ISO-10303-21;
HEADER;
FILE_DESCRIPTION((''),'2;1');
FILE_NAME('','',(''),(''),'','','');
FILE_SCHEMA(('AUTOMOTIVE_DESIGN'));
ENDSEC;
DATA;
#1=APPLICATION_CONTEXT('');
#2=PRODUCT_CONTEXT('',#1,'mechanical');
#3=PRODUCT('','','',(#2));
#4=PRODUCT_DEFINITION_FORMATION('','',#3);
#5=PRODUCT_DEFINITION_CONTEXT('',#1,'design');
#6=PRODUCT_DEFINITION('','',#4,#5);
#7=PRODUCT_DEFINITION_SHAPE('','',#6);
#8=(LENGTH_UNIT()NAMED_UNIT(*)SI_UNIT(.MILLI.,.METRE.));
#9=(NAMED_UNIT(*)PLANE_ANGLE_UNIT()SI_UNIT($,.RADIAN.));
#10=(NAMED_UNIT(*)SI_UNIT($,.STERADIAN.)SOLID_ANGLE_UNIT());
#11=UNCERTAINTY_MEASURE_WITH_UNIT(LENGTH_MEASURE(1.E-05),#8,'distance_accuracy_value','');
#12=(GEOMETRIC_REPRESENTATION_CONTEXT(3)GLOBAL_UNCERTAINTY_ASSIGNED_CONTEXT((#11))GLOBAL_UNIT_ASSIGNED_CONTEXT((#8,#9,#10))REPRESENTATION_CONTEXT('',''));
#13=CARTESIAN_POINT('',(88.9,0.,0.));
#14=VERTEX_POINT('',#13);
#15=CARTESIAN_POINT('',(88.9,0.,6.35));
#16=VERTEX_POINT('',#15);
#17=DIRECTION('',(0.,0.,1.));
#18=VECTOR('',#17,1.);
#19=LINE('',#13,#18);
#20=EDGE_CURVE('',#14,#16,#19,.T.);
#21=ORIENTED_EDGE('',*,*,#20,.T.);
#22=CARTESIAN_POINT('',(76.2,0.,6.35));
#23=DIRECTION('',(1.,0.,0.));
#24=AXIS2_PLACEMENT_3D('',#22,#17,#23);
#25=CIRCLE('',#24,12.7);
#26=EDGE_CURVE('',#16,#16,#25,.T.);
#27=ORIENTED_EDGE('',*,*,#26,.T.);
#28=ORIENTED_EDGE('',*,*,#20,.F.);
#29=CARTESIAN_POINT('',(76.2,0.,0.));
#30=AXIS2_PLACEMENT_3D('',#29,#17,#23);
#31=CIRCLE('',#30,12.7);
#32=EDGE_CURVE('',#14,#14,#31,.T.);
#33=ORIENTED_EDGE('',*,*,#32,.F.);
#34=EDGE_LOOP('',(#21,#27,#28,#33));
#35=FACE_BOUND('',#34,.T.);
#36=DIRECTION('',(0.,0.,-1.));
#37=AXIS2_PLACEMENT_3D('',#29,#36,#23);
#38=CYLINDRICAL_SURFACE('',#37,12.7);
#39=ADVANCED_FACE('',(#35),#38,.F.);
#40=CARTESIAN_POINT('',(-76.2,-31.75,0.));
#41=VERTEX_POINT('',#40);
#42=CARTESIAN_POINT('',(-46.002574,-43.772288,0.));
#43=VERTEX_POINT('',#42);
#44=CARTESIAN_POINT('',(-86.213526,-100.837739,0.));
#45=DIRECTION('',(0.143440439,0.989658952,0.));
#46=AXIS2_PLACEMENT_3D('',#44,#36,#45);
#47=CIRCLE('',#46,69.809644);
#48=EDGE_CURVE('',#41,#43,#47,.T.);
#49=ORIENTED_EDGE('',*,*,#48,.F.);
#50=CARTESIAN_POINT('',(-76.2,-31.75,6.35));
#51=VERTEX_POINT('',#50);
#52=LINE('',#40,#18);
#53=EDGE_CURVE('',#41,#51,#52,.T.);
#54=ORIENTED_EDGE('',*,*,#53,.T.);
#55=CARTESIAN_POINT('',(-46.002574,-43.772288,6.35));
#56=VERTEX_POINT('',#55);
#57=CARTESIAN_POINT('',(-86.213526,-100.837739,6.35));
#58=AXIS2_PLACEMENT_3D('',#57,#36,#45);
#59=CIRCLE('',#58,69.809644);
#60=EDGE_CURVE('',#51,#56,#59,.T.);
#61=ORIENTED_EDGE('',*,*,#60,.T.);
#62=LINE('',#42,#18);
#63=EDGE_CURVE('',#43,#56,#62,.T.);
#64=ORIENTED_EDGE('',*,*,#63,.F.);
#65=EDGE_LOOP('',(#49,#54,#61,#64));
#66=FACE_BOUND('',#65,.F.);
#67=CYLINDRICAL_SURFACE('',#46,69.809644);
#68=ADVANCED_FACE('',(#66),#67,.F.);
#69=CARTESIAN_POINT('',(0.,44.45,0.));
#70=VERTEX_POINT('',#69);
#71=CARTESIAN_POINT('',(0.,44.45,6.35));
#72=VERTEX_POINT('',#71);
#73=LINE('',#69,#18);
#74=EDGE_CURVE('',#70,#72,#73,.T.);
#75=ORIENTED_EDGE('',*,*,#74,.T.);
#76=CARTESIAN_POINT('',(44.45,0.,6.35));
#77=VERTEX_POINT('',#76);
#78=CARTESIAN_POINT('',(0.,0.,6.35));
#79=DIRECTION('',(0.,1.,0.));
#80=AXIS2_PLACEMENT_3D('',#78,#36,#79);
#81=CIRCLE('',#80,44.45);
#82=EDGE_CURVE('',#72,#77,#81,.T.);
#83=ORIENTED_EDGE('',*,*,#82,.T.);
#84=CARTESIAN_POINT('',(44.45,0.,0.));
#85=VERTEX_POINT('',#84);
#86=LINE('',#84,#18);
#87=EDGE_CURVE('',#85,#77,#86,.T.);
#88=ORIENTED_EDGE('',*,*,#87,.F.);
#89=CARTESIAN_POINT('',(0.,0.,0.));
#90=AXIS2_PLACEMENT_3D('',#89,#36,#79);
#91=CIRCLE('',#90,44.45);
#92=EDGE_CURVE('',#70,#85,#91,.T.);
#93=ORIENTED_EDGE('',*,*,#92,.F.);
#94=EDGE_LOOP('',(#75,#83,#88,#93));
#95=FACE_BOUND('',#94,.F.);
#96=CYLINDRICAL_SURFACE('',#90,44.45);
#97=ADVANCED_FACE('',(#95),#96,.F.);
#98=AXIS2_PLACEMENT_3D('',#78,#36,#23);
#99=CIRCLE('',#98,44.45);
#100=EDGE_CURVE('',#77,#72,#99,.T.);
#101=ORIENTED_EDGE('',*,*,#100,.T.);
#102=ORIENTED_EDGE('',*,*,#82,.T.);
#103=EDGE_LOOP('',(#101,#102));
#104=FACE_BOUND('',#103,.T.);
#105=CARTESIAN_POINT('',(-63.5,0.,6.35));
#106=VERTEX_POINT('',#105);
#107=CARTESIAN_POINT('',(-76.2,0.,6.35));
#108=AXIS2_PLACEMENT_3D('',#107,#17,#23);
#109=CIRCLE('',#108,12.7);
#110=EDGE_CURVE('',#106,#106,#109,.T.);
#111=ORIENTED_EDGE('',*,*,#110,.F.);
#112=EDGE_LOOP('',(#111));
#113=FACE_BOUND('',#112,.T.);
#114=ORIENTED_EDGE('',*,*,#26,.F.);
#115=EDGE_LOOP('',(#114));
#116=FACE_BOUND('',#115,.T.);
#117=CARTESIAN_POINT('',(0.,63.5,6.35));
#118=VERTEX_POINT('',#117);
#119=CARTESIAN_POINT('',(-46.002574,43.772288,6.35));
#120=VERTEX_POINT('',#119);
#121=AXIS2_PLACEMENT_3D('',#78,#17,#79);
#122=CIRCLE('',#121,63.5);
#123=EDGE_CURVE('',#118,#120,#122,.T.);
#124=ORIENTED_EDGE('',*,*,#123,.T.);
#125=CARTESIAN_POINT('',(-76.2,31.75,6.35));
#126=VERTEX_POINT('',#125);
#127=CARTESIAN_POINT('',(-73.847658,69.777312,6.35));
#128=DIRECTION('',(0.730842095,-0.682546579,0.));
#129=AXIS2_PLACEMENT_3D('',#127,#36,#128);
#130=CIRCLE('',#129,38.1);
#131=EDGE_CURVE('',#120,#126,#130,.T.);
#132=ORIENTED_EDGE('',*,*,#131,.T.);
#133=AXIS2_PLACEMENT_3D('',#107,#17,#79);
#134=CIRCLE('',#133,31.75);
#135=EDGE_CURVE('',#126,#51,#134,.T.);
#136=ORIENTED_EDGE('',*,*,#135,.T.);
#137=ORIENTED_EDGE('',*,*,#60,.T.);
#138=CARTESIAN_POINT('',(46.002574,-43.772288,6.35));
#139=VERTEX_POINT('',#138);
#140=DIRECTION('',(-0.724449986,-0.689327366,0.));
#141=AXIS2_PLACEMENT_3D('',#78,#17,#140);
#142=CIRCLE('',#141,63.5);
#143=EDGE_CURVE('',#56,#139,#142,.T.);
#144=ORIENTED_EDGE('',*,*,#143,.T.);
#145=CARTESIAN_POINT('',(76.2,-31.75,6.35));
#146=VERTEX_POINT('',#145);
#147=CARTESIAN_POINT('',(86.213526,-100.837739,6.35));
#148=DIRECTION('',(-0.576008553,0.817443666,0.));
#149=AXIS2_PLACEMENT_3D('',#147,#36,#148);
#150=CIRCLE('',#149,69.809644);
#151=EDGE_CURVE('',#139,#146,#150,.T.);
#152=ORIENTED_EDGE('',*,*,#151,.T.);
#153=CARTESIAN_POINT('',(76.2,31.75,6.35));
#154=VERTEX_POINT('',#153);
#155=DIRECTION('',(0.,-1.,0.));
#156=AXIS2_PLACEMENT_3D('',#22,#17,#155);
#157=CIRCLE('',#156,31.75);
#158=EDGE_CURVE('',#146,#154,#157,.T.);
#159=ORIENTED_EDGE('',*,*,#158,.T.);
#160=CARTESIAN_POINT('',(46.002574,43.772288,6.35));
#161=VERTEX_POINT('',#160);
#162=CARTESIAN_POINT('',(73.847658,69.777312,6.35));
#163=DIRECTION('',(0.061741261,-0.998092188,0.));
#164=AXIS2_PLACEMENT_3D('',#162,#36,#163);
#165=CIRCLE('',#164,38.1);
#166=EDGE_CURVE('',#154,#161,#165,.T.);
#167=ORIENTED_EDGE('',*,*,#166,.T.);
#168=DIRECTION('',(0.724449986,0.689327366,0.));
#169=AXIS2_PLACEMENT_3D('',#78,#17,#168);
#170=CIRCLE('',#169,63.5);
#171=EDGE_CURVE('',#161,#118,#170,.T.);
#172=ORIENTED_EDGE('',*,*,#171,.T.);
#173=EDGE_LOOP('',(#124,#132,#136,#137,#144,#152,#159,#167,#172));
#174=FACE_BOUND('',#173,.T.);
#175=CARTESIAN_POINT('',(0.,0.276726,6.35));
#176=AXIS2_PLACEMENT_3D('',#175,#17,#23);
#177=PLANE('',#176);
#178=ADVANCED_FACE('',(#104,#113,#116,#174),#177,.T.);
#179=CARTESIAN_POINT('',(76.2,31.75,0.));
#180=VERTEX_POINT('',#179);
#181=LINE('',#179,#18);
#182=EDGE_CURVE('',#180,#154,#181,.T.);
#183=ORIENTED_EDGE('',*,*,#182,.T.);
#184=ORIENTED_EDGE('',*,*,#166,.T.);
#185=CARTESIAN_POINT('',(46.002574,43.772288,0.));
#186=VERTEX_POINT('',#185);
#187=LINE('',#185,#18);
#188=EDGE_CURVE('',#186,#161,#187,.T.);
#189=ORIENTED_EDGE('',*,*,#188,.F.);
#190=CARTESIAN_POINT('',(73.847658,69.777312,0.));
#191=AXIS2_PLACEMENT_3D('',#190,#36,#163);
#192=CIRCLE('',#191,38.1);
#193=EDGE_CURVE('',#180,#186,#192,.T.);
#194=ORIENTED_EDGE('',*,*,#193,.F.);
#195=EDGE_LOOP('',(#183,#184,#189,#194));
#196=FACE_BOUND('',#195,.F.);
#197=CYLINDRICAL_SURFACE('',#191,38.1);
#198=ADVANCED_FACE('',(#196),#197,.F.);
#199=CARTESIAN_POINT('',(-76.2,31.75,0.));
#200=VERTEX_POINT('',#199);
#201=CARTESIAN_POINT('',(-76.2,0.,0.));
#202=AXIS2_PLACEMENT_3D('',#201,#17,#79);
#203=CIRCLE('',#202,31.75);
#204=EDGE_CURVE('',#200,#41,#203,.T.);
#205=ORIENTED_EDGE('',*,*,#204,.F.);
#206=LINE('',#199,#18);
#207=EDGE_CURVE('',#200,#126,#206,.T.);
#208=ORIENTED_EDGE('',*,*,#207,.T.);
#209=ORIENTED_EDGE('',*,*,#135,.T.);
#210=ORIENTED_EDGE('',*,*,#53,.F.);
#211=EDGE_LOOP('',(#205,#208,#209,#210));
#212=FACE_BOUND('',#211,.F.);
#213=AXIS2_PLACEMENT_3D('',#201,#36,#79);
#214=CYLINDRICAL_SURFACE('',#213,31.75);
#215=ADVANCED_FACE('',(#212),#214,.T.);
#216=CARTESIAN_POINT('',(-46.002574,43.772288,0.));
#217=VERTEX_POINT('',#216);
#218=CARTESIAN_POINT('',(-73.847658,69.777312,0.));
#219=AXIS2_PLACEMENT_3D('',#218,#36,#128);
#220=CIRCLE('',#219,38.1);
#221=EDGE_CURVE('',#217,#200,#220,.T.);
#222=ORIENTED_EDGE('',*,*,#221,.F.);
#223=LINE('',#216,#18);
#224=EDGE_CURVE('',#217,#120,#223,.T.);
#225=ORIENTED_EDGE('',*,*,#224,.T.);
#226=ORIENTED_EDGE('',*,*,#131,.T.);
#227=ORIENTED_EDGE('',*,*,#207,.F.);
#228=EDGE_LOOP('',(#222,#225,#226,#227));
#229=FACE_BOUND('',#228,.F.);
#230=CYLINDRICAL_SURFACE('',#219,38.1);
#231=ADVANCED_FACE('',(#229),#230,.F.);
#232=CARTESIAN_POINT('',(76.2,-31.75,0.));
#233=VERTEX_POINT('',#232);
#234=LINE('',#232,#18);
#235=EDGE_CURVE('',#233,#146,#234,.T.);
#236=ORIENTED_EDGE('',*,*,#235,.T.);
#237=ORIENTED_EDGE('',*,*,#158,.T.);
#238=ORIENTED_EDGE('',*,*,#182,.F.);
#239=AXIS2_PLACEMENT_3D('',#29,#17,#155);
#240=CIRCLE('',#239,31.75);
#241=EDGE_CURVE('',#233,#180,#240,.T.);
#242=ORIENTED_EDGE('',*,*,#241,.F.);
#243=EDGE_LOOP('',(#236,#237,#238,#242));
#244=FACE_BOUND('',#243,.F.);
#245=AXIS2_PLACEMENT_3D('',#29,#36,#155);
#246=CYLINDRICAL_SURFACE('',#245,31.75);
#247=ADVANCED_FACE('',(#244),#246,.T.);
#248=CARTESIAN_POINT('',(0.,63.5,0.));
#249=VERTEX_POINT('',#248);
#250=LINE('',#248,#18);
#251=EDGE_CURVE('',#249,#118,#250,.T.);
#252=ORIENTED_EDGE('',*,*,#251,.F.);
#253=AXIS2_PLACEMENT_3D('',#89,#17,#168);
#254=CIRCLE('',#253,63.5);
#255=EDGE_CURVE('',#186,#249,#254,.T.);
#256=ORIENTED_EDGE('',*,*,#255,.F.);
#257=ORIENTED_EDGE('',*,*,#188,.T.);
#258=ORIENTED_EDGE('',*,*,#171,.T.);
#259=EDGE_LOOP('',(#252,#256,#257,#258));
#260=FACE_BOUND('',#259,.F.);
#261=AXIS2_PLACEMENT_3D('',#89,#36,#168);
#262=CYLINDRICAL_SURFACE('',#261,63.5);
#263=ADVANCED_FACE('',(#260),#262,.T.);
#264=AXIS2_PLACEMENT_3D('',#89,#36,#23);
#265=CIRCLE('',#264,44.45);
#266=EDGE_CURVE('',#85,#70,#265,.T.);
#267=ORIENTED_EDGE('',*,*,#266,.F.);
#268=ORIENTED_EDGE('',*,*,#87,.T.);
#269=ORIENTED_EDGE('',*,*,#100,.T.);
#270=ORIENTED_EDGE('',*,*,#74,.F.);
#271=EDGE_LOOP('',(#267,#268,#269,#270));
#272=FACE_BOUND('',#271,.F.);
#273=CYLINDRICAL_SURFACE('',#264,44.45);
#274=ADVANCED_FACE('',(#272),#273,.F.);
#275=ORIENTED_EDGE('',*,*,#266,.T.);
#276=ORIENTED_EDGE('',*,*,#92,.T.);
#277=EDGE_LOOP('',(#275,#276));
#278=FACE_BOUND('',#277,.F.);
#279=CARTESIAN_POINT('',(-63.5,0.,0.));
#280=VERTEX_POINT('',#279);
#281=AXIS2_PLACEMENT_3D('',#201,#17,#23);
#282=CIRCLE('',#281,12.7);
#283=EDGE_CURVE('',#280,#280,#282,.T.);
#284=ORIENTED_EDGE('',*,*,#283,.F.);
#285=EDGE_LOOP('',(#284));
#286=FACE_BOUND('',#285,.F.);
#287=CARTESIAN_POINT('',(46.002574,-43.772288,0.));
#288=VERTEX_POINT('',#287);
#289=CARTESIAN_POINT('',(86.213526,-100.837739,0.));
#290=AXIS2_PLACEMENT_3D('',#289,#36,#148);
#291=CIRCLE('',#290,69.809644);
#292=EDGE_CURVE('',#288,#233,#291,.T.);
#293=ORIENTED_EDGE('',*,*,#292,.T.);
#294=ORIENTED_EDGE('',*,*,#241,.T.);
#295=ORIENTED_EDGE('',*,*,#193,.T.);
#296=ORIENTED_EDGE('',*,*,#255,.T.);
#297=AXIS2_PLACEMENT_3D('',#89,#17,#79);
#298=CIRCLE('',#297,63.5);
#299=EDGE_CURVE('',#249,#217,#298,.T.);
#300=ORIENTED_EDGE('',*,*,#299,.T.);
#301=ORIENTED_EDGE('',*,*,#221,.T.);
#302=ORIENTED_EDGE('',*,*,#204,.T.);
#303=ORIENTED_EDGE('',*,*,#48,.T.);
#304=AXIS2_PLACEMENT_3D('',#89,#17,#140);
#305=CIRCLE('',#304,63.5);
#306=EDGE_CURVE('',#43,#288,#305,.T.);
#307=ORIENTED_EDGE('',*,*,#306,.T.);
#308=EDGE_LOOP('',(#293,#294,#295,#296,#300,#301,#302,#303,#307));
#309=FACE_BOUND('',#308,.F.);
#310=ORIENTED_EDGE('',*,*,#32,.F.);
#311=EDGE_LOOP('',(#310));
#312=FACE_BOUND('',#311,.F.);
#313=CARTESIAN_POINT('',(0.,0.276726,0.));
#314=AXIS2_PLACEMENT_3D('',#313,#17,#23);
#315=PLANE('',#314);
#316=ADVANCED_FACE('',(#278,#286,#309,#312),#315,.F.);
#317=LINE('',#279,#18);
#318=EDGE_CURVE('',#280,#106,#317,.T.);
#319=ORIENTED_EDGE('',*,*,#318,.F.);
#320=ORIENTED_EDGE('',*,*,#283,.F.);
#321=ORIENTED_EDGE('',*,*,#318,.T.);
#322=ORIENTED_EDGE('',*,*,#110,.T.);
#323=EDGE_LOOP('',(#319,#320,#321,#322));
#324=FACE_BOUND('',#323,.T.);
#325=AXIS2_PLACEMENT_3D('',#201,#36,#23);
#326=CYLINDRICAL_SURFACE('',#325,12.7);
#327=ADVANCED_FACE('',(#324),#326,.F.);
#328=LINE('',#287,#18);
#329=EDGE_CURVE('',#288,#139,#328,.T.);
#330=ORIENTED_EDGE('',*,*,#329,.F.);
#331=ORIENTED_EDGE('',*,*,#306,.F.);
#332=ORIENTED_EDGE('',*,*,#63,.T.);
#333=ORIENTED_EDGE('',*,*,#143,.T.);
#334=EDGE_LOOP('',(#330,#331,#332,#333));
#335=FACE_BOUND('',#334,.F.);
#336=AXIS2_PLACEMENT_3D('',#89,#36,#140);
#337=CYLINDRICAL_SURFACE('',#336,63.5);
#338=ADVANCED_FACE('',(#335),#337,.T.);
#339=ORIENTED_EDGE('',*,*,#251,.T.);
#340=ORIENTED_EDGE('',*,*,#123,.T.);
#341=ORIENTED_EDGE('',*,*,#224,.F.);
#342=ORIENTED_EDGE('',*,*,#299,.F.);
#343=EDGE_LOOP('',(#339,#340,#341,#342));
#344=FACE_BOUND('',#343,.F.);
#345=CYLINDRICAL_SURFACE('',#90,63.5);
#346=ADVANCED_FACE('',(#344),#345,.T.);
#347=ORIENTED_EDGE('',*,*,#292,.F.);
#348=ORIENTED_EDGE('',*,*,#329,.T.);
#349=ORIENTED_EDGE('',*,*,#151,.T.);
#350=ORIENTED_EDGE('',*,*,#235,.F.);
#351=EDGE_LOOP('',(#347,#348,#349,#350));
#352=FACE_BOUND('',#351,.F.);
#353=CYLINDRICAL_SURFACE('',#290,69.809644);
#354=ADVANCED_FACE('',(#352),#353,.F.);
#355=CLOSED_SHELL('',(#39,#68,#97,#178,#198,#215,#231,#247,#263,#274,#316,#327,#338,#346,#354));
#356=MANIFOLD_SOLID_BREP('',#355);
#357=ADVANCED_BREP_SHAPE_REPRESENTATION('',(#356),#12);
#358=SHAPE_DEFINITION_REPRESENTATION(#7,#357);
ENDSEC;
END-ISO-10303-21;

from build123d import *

# Parameters (mm, degrees)
F0_R     = 12.7
F1_DEPTH = 6.35


# Not quite as in the source:
# - a feature names something its author has since deleted; it is built from what else it names


with BuildPart() as f1:
    # F0 (on Top) → F1 (new body)
    with BuildSketch(Plane.XY):
        with BuildLine():
            ThreePointArc((46.002574141, 43.7722877218), (25.0270826273, 58.3600474226), (0, 63.5))
            ThreePointArc((0, 63.5), (-25.0270826273, 58.3600474226), (-46.002574141, 43.7722877218))
            ThreePointArc((-46.002574141, 43.7722877218), (-59.7549711548, 34.379485063), (-76.2, 31.75))
            ThreePointArc((-76.2, 31.75), (-107.95, 0), (-76.2, -31.75))
            ThreePointArc((-76.2, -31.75), (-60.3918607808, -35.9792161379), (-46.002574141, -43.7722877218))
            ThreePointArc((-46.002574141, -43.7722877218), (0, -63.5), (46.002574141, -43.7722877218))
            ThreePointArc((46.002574141, -43.7722877218), (60.3918607808, -35.9792161379), (76.2, -31.75))
            ThreePointArc((76.2, -31.75), (107.95, 0), (76.2, 31.75))
            ThreePointArc((76.2, 31.75), (59.7549711548, 34.379485063), (46.002574141, 43.7722877218))
        make_face()
        with Locations((-76.2, 0)):
            Circle(F0_R, mode=Mode.SUBTRACT)
        with BuildLine():
            ThreePointArc((0, 44.45), (31.4308964237, 31.4308964237), (44.45, 0))
            ThreePointArc((44.45, 0), (-31.4308964237, -31.4308964237), (0, 44.45))
        make_face(mode=Mode.SUBTRACT)
        with Locations((76.2, 0)):
            Circle(F0_R, mode=Mode.SUBTRACT)
    extrude(amount=F1_DEPTH)


solid = f1.part
